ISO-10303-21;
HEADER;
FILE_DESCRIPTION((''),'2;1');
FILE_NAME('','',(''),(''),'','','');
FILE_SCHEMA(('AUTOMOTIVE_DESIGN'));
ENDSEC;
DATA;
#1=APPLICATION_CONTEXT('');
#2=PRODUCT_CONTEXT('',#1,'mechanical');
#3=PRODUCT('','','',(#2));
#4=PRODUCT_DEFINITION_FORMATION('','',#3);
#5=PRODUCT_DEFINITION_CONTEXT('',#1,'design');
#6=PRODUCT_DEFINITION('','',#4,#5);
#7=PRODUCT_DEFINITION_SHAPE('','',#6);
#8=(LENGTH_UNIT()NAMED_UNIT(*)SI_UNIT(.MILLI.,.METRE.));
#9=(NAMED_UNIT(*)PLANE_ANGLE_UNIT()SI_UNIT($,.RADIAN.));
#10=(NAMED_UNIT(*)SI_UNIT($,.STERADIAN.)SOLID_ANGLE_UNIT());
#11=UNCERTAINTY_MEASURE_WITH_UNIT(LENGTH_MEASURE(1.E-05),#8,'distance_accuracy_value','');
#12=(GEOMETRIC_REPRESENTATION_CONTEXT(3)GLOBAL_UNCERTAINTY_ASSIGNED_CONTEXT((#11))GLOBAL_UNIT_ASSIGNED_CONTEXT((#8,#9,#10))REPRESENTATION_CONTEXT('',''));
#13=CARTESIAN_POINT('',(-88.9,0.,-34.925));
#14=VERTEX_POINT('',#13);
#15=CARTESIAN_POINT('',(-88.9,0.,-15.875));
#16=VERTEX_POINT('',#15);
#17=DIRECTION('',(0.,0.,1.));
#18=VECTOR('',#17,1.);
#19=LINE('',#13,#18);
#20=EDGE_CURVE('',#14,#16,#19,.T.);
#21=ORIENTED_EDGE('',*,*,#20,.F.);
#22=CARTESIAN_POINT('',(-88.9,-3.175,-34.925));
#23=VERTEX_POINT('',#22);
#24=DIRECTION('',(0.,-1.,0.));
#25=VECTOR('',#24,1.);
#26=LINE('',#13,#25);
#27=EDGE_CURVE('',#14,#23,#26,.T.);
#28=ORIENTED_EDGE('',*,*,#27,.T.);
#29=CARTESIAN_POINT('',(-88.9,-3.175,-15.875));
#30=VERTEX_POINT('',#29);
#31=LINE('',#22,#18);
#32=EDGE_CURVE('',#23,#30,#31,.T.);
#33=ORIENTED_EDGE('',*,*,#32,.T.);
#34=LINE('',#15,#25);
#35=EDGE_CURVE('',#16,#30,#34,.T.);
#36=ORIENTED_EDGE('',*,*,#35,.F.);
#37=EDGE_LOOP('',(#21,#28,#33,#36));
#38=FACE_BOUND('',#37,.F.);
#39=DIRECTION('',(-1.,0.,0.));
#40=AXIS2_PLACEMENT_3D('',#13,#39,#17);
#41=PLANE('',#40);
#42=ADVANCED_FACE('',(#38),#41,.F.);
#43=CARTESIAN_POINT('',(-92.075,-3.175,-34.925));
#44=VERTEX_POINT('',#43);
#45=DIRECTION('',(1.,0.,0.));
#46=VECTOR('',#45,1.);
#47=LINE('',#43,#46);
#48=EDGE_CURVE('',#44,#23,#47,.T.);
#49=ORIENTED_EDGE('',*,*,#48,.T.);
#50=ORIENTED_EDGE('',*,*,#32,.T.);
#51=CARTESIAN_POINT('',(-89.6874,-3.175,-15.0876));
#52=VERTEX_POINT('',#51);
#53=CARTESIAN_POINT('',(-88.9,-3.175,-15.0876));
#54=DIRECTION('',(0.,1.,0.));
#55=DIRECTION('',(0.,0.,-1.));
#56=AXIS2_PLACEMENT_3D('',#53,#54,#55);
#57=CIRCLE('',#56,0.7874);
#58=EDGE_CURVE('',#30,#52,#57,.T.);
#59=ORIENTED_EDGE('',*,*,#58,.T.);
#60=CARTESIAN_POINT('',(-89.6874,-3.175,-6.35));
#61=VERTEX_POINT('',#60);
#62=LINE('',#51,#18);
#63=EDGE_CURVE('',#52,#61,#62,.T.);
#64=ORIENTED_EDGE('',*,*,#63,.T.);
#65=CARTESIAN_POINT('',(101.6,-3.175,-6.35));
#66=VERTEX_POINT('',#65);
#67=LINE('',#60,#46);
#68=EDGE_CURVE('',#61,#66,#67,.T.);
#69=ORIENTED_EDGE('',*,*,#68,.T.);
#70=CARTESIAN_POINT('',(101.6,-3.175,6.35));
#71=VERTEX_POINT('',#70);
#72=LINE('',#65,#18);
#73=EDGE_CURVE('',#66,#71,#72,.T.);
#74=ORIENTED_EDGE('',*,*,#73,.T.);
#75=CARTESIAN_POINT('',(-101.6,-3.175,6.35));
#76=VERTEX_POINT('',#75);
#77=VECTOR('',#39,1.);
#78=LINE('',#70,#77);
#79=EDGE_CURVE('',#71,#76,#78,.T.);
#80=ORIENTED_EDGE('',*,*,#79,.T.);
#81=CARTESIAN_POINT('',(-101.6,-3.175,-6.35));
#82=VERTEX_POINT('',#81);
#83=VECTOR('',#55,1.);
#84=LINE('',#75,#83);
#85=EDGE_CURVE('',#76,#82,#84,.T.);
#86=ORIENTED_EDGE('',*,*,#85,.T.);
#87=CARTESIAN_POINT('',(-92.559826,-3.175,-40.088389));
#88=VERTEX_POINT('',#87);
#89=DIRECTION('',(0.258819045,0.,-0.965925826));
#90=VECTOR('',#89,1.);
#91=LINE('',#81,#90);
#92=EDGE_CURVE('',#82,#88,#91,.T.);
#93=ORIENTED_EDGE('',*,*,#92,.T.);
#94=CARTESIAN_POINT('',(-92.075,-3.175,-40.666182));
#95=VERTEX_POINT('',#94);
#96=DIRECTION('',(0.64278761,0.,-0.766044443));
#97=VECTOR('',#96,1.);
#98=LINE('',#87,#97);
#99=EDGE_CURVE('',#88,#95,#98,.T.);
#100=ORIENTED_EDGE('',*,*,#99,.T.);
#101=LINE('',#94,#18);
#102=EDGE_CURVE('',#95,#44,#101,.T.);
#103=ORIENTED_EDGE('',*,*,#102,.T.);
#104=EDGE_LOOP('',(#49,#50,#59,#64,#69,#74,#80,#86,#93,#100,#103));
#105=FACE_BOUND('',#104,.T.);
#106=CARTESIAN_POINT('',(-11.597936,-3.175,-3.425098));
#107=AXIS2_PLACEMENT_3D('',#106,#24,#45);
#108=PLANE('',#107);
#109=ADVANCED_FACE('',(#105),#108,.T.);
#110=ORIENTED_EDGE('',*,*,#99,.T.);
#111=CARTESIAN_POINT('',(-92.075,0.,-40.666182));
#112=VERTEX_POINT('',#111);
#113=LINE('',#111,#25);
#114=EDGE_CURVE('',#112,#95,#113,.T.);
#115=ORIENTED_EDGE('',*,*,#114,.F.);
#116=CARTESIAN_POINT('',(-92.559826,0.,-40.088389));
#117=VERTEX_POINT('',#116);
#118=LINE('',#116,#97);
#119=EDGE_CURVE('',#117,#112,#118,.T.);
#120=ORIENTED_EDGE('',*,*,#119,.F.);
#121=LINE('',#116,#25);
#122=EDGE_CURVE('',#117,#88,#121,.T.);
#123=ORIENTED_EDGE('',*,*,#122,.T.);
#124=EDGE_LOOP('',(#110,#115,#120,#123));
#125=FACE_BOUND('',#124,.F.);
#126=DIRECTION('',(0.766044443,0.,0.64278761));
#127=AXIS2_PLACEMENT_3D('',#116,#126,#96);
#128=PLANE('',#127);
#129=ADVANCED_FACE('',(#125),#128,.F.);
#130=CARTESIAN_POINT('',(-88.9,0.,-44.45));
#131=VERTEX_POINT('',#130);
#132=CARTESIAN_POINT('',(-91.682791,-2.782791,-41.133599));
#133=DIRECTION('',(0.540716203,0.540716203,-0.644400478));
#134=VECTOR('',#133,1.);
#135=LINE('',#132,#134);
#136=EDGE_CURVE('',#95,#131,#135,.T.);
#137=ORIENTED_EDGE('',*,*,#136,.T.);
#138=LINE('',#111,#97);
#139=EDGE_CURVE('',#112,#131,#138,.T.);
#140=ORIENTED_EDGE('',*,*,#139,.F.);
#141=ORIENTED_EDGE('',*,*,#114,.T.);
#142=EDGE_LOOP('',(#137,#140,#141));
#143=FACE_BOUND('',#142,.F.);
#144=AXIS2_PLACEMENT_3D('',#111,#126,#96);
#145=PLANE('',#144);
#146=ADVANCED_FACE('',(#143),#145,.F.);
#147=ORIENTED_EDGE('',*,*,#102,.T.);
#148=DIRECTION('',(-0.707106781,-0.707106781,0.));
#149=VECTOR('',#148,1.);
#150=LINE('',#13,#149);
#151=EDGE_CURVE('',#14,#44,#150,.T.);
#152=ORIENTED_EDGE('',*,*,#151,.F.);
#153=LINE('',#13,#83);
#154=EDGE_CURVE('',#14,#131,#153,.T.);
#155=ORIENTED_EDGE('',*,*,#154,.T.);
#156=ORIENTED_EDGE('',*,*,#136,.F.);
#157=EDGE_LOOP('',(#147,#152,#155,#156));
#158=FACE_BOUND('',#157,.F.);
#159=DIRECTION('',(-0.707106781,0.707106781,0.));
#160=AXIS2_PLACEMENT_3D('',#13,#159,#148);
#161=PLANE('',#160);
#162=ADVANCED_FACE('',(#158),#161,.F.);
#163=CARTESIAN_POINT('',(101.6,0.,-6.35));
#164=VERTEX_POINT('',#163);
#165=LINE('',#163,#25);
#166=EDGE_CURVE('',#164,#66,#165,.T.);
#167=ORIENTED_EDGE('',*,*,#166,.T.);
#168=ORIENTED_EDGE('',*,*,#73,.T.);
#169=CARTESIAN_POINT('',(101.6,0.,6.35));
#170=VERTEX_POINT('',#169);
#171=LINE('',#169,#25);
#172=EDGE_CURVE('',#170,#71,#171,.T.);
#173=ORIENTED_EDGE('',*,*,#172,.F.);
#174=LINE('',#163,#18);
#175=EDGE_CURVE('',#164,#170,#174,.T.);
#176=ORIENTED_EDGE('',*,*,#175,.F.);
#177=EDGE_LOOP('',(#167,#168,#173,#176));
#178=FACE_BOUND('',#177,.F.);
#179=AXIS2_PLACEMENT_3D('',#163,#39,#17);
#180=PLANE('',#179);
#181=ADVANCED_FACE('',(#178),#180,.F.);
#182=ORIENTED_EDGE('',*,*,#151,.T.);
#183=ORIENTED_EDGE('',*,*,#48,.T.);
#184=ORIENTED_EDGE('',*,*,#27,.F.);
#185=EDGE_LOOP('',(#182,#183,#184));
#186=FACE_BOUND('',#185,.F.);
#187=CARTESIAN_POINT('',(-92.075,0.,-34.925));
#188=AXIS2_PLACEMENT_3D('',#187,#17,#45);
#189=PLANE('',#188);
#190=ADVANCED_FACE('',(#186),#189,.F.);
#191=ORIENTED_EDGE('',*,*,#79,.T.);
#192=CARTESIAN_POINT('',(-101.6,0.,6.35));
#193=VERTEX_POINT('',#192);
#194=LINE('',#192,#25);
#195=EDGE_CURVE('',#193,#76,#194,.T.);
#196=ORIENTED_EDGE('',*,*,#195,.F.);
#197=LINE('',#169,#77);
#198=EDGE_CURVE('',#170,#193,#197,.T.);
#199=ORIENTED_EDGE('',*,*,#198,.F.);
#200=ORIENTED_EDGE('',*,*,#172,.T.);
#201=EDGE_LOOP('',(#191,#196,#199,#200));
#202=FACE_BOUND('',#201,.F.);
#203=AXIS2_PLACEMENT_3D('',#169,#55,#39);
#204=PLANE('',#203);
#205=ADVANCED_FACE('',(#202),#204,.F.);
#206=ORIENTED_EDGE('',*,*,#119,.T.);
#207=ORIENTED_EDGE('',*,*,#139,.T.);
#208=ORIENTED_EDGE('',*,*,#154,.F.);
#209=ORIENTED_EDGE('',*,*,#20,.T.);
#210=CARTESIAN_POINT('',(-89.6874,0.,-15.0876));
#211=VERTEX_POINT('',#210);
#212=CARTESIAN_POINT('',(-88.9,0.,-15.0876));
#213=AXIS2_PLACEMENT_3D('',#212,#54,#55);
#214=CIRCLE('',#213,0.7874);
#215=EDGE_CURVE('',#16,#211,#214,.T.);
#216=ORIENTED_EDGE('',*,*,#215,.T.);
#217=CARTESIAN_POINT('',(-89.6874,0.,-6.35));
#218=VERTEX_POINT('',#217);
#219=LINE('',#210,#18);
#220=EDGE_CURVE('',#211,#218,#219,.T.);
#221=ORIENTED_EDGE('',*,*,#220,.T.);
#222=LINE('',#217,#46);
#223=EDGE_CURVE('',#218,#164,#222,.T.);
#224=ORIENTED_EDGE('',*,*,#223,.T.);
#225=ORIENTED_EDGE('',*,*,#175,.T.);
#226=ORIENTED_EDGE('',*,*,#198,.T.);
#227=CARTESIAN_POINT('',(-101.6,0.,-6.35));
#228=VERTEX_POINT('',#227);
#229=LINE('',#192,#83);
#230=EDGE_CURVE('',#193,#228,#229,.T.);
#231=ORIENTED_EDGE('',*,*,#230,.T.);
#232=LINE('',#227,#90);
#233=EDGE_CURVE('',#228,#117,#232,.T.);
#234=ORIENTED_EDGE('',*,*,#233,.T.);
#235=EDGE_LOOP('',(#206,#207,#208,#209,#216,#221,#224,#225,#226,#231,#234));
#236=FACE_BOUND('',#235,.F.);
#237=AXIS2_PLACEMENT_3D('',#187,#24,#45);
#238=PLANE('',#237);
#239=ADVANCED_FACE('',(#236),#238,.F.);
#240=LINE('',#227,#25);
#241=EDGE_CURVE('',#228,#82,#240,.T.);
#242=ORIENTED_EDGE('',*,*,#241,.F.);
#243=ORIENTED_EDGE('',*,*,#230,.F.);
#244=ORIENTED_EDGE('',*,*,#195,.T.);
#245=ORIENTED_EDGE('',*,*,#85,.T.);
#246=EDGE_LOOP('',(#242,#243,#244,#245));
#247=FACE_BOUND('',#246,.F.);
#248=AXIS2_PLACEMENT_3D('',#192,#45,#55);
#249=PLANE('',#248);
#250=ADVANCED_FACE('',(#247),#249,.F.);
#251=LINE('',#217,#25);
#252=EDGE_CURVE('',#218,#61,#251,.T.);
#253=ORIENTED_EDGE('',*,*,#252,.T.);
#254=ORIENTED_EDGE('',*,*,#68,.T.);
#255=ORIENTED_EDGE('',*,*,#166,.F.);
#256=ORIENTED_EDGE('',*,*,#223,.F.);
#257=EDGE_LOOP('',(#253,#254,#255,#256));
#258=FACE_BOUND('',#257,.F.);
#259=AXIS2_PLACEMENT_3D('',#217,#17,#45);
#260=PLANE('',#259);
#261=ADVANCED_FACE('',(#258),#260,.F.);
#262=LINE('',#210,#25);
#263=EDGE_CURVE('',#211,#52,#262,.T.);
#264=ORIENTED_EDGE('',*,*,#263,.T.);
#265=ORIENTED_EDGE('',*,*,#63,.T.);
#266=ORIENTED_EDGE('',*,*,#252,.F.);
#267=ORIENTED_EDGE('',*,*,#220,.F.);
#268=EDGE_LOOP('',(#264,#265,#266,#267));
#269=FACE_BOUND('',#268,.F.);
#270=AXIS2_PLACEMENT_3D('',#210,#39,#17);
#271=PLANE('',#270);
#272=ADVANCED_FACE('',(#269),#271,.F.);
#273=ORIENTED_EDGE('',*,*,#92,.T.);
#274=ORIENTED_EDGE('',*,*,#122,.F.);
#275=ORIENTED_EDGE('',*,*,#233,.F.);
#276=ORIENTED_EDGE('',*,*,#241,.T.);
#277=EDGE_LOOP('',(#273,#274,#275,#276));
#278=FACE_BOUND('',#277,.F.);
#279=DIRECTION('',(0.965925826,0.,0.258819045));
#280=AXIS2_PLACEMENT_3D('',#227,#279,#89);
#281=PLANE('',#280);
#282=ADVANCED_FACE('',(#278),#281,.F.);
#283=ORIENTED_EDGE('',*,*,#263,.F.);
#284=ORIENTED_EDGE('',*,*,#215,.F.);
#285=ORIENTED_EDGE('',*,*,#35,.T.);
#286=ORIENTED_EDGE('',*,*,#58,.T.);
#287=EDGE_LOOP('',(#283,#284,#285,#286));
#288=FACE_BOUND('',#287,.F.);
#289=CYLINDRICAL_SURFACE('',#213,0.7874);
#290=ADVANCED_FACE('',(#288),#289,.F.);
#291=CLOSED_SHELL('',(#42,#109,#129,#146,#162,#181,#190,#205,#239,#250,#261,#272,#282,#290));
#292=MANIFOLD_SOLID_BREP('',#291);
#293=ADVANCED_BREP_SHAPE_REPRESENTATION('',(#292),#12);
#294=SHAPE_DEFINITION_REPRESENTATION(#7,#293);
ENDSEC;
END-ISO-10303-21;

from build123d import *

# Parameters (mm, degrees)
F1_DEPTH = 3.175
F3_DEPTH = 9.525
F5_DEPTH = 3.176


# Not quite as in the source:
# - a feature names something its author has since deleted; it is built from what else it names


with BuildPart() as f1:
    # F0 (on Front) → F1 (new body)
    with BuildSketch(Plane.XZ):
        with BuildLine():
            Line((101.6, 6.35), (-101.6, 6.35))
            Line((-101.6, 6.35), (-101.6, -6.35))
            Line((-101.6, -6.35), (-92.5598257878, -40.0883894691))
            Line((-92.5598257878, -40.0883894691), (-92.075, -40.6661823435))
            Line((-92.075, -40.6661823435), (-92.075, -34.925))
            Line((-92.075, -34.925), (-88.9, -34.925))
            Line((-88.9, -34.925), (-88.9, -15.875))
            ThreePointArc((-88.9, -15.875), (-89.4567758795, -15.6443758795), (-89.6874, -15.0876))
            Line((-89.6874, -15.0876), (-89.6874, -6.35))
            Line((-89.6874, -6.35), (101.6, -6.35))
            Line((101.6, -6.35), (101.6, 6.35))
        make_face()
    extrude(amount=F1_DEPTH)

    # F2 (on face) → F3 (join)
    with BuildSketch(Plane(origin=(0, 0, -34.925), x_dir=(1, 0, 0), z_dir=(0, 0, -1))):
        Polygon((-88.9, 0), (-92.075, 3.175), (-92.075, 0), align=None)
    extrude(amount=F3_DEPTH)

    # F4 (on face) → F5 (cut, through all)
    with BuildSketch(Plane(origin=(0, 0, 0), x_dir=(-1, 0, 0), z_dir=(0, 1, 0))):
        Polygon((92.075, -44.45), (92.075, -40.6661823435), (88.9, -44.45), align=None)
    extrude(amount=-F5_DEPTH, mode=Mode.SUBTRACT)


solid = f1.part
